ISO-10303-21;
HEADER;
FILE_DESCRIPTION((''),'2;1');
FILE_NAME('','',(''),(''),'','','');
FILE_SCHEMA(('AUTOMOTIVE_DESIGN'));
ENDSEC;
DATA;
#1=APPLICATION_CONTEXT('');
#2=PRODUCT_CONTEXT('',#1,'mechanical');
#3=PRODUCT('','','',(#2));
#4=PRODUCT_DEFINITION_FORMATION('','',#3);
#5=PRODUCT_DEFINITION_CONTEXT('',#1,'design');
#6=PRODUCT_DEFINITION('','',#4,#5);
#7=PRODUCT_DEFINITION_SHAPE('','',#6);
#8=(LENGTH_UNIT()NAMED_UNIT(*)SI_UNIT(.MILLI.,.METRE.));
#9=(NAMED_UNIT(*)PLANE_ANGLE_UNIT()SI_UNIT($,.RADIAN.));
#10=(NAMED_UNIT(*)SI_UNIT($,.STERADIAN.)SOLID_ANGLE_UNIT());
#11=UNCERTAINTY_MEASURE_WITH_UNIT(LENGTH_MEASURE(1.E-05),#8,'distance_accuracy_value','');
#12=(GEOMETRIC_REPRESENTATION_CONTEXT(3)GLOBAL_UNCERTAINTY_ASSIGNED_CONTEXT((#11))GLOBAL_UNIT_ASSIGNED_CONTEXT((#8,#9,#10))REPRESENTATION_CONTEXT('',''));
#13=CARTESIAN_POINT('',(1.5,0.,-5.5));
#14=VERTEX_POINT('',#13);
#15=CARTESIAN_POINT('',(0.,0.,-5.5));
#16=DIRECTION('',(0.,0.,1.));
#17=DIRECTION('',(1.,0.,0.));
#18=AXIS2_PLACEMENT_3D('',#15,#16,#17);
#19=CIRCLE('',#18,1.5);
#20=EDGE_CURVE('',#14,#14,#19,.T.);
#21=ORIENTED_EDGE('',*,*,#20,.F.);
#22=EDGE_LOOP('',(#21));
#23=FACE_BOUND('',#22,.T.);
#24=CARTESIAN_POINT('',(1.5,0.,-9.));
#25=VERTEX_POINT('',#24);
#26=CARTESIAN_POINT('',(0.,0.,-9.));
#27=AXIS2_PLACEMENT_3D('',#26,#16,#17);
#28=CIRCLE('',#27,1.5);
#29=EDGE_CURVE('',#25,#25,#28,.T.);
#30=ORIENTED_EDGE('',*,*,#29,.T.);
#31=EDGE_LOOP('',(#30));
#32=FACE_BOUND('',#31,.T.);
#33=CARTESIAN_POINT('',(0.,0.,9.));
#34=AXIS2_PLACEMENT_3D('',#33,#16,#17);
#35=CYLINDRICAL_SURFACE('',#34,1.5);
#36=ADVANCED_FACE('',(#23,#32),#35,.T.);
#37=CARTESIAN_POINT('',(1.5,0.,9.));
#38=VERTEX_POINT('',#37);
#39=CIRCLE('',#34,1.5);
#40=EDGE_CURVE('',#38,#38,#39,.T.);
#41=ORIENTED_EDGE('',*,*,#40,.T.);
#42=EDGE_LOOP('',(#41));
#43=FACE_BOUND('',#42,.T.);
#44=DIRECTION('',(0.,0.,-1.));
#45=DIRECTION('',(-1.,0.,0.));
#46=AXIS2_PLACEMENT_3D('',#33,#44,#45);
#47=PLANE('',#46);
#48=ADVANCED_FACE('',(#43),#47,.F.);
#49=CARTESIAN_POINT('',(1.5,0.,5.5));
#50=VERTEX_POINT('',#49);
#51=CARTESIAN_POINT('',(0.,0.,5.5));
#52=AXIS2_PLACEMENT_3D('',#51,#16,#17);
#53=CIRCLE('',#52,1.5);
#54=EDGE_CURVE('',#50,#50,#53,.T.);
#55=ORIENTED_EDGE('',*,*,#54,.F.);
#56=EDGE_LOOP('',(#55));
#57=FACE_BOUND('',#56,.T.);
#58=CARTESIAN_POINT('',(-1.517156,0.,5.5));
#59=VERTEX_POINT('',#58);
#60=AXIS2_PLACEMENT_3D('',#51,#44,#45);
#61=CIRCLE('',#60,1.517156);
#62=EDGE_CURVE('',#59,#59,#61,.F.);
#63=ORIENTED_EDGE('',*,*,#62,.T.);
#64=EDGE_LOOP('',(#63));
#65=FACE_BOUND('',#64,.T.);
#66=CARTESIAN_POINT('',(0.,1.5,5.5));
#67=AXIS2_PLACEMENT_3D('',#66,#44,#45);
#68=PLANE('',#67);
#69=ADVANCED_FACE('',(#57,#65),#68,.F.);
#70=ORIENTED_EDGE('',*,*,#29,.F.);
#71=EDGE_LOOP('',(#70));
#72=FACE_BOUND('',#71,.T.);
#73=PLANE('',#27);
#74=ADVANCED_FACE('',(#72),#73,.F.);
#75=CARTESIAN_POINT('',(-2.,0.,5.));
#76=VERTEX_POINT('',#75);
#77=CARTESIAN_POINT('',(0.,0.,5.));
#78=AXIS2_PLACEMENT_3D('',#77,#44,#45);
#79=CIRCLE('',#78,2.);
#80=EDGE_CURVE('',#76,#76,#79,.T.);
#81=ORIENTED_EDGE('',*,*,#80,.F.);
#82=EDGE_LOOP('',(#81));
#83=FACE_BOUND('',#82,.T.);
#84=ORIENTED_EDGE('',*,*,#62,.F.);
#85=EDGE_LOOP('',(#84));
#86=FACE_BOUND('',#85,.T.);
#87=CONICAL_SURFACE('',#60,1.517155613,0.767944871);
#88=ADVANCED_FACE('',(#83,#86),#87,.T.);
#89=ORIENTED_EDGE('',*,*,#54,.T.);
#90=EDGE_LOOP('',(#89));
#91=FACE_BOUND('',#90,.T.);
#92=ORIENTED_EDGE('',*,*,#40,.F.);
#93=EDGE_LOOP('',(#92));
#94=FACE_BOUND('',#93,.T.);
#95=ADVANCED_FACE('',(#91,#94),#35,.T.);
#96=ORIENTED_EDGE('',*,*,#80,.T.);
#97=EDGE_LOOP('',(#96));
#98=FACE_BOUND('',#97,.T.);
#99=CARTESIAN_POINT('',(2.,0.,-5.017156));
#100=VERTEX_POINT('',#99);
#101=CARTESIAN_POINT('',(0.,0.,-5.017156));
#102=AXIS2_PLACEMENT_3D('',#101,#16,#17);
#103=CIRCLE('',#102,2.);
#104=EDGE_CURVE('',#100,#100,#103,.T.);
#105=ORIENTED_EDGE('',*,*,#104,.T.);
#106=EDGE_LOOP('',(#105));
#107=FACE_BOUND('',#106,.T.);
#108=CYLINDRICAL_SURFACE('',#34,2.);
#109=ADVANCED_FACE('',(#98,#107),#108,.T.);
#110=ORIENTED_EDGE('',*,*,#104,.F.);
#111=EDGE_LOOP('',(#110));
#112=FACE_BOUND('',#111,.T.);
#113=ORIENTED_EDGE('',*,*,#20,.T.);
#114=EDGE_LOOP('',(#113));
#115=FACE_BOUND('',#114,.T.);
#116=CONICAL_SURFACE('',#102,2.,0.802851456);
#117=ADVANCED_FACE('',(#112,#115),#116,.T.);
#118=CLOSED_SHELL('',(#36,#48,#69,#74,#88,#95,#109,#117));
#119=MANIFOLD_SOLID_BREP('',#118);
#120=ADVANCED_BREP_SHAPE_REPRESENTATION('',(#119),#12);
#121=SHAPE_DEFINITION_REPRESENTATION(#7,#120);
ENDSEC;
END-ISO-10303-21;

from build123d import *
from OCP.BRepFilletAPI import BRepFilletAPI_MakeChamfer

# Parameters (mm, degrees)
CHAMFER1_SIZE   = 0.5
CHAMFER1_SIZE_2 = 0.482844387


with BuildPart() as part:
    # Sketch1 → Revolve1 (revolve)
    with BuildSketch(Plane(origin=(0, 0, 0), x_dir=(0, 0, -1), z_dir=(1, 0, 0)), mode=Mode.PRIVATE) as revolve1_sk:
        Polygon((-9, 0), (9, 0), (9, 1.5), (5.5, 1.5), (5.5, 2), (-5.5, 2), (-5.5, 1.5), (-9, 1.5), align=None)
    revolve(revolve1_sk.sketch.rotate(Axis((0, 0, 9), (0, 0, -1)), 90), axis=Axis((0, 0, 9), (0, 0, -1)))

    # Chamfer1
    chamfer1_edges_1 = [part.edges().sort_by_distance(p)[0] for p in [
        (-2, 0, -5.5),
    ]]
    chamfer1_side_1 = [part.faces().sort_by_distance(p)[0] for p in [
        (-1.990343112, 0, -5.5),
    ]]
    chamfer1_edges_2 = [part.edges().sort_by_distance(p)[0] for p in [
        (-2, 0, 5.5),
    ]]
    chamfer1_side_2 = [part.faces().sort_by_distance(p)[0] for p in [
        (-2, 0, 5.490343112),
    ]]
    chamfer1 = BRepFilletAPI_MakeChamfer(part.part.solid().wrapped)
    for e in chamfer1_edges_1:
        chamfer1.Add(CHAMFER1_SIZE - 0.0001, CHAMFER1_SIZE_2 - 0.0001, e.wrapped, chamfer1_side_1[0].wrapped)
    for e in chamfer1_edges_2:
        chamfer1.Add(CHAMFER1_SIZE - 0.0001, CHAMFER1_SIZE_2 - 0.0001, e.wrapped, chamfer1_side_2[0].wrapped)
    add(Compound.cast(chamfer1.Shape()), mode=Mode.REPLACE)  # a hair under: the kernel refuses the full size


solid = part.part
